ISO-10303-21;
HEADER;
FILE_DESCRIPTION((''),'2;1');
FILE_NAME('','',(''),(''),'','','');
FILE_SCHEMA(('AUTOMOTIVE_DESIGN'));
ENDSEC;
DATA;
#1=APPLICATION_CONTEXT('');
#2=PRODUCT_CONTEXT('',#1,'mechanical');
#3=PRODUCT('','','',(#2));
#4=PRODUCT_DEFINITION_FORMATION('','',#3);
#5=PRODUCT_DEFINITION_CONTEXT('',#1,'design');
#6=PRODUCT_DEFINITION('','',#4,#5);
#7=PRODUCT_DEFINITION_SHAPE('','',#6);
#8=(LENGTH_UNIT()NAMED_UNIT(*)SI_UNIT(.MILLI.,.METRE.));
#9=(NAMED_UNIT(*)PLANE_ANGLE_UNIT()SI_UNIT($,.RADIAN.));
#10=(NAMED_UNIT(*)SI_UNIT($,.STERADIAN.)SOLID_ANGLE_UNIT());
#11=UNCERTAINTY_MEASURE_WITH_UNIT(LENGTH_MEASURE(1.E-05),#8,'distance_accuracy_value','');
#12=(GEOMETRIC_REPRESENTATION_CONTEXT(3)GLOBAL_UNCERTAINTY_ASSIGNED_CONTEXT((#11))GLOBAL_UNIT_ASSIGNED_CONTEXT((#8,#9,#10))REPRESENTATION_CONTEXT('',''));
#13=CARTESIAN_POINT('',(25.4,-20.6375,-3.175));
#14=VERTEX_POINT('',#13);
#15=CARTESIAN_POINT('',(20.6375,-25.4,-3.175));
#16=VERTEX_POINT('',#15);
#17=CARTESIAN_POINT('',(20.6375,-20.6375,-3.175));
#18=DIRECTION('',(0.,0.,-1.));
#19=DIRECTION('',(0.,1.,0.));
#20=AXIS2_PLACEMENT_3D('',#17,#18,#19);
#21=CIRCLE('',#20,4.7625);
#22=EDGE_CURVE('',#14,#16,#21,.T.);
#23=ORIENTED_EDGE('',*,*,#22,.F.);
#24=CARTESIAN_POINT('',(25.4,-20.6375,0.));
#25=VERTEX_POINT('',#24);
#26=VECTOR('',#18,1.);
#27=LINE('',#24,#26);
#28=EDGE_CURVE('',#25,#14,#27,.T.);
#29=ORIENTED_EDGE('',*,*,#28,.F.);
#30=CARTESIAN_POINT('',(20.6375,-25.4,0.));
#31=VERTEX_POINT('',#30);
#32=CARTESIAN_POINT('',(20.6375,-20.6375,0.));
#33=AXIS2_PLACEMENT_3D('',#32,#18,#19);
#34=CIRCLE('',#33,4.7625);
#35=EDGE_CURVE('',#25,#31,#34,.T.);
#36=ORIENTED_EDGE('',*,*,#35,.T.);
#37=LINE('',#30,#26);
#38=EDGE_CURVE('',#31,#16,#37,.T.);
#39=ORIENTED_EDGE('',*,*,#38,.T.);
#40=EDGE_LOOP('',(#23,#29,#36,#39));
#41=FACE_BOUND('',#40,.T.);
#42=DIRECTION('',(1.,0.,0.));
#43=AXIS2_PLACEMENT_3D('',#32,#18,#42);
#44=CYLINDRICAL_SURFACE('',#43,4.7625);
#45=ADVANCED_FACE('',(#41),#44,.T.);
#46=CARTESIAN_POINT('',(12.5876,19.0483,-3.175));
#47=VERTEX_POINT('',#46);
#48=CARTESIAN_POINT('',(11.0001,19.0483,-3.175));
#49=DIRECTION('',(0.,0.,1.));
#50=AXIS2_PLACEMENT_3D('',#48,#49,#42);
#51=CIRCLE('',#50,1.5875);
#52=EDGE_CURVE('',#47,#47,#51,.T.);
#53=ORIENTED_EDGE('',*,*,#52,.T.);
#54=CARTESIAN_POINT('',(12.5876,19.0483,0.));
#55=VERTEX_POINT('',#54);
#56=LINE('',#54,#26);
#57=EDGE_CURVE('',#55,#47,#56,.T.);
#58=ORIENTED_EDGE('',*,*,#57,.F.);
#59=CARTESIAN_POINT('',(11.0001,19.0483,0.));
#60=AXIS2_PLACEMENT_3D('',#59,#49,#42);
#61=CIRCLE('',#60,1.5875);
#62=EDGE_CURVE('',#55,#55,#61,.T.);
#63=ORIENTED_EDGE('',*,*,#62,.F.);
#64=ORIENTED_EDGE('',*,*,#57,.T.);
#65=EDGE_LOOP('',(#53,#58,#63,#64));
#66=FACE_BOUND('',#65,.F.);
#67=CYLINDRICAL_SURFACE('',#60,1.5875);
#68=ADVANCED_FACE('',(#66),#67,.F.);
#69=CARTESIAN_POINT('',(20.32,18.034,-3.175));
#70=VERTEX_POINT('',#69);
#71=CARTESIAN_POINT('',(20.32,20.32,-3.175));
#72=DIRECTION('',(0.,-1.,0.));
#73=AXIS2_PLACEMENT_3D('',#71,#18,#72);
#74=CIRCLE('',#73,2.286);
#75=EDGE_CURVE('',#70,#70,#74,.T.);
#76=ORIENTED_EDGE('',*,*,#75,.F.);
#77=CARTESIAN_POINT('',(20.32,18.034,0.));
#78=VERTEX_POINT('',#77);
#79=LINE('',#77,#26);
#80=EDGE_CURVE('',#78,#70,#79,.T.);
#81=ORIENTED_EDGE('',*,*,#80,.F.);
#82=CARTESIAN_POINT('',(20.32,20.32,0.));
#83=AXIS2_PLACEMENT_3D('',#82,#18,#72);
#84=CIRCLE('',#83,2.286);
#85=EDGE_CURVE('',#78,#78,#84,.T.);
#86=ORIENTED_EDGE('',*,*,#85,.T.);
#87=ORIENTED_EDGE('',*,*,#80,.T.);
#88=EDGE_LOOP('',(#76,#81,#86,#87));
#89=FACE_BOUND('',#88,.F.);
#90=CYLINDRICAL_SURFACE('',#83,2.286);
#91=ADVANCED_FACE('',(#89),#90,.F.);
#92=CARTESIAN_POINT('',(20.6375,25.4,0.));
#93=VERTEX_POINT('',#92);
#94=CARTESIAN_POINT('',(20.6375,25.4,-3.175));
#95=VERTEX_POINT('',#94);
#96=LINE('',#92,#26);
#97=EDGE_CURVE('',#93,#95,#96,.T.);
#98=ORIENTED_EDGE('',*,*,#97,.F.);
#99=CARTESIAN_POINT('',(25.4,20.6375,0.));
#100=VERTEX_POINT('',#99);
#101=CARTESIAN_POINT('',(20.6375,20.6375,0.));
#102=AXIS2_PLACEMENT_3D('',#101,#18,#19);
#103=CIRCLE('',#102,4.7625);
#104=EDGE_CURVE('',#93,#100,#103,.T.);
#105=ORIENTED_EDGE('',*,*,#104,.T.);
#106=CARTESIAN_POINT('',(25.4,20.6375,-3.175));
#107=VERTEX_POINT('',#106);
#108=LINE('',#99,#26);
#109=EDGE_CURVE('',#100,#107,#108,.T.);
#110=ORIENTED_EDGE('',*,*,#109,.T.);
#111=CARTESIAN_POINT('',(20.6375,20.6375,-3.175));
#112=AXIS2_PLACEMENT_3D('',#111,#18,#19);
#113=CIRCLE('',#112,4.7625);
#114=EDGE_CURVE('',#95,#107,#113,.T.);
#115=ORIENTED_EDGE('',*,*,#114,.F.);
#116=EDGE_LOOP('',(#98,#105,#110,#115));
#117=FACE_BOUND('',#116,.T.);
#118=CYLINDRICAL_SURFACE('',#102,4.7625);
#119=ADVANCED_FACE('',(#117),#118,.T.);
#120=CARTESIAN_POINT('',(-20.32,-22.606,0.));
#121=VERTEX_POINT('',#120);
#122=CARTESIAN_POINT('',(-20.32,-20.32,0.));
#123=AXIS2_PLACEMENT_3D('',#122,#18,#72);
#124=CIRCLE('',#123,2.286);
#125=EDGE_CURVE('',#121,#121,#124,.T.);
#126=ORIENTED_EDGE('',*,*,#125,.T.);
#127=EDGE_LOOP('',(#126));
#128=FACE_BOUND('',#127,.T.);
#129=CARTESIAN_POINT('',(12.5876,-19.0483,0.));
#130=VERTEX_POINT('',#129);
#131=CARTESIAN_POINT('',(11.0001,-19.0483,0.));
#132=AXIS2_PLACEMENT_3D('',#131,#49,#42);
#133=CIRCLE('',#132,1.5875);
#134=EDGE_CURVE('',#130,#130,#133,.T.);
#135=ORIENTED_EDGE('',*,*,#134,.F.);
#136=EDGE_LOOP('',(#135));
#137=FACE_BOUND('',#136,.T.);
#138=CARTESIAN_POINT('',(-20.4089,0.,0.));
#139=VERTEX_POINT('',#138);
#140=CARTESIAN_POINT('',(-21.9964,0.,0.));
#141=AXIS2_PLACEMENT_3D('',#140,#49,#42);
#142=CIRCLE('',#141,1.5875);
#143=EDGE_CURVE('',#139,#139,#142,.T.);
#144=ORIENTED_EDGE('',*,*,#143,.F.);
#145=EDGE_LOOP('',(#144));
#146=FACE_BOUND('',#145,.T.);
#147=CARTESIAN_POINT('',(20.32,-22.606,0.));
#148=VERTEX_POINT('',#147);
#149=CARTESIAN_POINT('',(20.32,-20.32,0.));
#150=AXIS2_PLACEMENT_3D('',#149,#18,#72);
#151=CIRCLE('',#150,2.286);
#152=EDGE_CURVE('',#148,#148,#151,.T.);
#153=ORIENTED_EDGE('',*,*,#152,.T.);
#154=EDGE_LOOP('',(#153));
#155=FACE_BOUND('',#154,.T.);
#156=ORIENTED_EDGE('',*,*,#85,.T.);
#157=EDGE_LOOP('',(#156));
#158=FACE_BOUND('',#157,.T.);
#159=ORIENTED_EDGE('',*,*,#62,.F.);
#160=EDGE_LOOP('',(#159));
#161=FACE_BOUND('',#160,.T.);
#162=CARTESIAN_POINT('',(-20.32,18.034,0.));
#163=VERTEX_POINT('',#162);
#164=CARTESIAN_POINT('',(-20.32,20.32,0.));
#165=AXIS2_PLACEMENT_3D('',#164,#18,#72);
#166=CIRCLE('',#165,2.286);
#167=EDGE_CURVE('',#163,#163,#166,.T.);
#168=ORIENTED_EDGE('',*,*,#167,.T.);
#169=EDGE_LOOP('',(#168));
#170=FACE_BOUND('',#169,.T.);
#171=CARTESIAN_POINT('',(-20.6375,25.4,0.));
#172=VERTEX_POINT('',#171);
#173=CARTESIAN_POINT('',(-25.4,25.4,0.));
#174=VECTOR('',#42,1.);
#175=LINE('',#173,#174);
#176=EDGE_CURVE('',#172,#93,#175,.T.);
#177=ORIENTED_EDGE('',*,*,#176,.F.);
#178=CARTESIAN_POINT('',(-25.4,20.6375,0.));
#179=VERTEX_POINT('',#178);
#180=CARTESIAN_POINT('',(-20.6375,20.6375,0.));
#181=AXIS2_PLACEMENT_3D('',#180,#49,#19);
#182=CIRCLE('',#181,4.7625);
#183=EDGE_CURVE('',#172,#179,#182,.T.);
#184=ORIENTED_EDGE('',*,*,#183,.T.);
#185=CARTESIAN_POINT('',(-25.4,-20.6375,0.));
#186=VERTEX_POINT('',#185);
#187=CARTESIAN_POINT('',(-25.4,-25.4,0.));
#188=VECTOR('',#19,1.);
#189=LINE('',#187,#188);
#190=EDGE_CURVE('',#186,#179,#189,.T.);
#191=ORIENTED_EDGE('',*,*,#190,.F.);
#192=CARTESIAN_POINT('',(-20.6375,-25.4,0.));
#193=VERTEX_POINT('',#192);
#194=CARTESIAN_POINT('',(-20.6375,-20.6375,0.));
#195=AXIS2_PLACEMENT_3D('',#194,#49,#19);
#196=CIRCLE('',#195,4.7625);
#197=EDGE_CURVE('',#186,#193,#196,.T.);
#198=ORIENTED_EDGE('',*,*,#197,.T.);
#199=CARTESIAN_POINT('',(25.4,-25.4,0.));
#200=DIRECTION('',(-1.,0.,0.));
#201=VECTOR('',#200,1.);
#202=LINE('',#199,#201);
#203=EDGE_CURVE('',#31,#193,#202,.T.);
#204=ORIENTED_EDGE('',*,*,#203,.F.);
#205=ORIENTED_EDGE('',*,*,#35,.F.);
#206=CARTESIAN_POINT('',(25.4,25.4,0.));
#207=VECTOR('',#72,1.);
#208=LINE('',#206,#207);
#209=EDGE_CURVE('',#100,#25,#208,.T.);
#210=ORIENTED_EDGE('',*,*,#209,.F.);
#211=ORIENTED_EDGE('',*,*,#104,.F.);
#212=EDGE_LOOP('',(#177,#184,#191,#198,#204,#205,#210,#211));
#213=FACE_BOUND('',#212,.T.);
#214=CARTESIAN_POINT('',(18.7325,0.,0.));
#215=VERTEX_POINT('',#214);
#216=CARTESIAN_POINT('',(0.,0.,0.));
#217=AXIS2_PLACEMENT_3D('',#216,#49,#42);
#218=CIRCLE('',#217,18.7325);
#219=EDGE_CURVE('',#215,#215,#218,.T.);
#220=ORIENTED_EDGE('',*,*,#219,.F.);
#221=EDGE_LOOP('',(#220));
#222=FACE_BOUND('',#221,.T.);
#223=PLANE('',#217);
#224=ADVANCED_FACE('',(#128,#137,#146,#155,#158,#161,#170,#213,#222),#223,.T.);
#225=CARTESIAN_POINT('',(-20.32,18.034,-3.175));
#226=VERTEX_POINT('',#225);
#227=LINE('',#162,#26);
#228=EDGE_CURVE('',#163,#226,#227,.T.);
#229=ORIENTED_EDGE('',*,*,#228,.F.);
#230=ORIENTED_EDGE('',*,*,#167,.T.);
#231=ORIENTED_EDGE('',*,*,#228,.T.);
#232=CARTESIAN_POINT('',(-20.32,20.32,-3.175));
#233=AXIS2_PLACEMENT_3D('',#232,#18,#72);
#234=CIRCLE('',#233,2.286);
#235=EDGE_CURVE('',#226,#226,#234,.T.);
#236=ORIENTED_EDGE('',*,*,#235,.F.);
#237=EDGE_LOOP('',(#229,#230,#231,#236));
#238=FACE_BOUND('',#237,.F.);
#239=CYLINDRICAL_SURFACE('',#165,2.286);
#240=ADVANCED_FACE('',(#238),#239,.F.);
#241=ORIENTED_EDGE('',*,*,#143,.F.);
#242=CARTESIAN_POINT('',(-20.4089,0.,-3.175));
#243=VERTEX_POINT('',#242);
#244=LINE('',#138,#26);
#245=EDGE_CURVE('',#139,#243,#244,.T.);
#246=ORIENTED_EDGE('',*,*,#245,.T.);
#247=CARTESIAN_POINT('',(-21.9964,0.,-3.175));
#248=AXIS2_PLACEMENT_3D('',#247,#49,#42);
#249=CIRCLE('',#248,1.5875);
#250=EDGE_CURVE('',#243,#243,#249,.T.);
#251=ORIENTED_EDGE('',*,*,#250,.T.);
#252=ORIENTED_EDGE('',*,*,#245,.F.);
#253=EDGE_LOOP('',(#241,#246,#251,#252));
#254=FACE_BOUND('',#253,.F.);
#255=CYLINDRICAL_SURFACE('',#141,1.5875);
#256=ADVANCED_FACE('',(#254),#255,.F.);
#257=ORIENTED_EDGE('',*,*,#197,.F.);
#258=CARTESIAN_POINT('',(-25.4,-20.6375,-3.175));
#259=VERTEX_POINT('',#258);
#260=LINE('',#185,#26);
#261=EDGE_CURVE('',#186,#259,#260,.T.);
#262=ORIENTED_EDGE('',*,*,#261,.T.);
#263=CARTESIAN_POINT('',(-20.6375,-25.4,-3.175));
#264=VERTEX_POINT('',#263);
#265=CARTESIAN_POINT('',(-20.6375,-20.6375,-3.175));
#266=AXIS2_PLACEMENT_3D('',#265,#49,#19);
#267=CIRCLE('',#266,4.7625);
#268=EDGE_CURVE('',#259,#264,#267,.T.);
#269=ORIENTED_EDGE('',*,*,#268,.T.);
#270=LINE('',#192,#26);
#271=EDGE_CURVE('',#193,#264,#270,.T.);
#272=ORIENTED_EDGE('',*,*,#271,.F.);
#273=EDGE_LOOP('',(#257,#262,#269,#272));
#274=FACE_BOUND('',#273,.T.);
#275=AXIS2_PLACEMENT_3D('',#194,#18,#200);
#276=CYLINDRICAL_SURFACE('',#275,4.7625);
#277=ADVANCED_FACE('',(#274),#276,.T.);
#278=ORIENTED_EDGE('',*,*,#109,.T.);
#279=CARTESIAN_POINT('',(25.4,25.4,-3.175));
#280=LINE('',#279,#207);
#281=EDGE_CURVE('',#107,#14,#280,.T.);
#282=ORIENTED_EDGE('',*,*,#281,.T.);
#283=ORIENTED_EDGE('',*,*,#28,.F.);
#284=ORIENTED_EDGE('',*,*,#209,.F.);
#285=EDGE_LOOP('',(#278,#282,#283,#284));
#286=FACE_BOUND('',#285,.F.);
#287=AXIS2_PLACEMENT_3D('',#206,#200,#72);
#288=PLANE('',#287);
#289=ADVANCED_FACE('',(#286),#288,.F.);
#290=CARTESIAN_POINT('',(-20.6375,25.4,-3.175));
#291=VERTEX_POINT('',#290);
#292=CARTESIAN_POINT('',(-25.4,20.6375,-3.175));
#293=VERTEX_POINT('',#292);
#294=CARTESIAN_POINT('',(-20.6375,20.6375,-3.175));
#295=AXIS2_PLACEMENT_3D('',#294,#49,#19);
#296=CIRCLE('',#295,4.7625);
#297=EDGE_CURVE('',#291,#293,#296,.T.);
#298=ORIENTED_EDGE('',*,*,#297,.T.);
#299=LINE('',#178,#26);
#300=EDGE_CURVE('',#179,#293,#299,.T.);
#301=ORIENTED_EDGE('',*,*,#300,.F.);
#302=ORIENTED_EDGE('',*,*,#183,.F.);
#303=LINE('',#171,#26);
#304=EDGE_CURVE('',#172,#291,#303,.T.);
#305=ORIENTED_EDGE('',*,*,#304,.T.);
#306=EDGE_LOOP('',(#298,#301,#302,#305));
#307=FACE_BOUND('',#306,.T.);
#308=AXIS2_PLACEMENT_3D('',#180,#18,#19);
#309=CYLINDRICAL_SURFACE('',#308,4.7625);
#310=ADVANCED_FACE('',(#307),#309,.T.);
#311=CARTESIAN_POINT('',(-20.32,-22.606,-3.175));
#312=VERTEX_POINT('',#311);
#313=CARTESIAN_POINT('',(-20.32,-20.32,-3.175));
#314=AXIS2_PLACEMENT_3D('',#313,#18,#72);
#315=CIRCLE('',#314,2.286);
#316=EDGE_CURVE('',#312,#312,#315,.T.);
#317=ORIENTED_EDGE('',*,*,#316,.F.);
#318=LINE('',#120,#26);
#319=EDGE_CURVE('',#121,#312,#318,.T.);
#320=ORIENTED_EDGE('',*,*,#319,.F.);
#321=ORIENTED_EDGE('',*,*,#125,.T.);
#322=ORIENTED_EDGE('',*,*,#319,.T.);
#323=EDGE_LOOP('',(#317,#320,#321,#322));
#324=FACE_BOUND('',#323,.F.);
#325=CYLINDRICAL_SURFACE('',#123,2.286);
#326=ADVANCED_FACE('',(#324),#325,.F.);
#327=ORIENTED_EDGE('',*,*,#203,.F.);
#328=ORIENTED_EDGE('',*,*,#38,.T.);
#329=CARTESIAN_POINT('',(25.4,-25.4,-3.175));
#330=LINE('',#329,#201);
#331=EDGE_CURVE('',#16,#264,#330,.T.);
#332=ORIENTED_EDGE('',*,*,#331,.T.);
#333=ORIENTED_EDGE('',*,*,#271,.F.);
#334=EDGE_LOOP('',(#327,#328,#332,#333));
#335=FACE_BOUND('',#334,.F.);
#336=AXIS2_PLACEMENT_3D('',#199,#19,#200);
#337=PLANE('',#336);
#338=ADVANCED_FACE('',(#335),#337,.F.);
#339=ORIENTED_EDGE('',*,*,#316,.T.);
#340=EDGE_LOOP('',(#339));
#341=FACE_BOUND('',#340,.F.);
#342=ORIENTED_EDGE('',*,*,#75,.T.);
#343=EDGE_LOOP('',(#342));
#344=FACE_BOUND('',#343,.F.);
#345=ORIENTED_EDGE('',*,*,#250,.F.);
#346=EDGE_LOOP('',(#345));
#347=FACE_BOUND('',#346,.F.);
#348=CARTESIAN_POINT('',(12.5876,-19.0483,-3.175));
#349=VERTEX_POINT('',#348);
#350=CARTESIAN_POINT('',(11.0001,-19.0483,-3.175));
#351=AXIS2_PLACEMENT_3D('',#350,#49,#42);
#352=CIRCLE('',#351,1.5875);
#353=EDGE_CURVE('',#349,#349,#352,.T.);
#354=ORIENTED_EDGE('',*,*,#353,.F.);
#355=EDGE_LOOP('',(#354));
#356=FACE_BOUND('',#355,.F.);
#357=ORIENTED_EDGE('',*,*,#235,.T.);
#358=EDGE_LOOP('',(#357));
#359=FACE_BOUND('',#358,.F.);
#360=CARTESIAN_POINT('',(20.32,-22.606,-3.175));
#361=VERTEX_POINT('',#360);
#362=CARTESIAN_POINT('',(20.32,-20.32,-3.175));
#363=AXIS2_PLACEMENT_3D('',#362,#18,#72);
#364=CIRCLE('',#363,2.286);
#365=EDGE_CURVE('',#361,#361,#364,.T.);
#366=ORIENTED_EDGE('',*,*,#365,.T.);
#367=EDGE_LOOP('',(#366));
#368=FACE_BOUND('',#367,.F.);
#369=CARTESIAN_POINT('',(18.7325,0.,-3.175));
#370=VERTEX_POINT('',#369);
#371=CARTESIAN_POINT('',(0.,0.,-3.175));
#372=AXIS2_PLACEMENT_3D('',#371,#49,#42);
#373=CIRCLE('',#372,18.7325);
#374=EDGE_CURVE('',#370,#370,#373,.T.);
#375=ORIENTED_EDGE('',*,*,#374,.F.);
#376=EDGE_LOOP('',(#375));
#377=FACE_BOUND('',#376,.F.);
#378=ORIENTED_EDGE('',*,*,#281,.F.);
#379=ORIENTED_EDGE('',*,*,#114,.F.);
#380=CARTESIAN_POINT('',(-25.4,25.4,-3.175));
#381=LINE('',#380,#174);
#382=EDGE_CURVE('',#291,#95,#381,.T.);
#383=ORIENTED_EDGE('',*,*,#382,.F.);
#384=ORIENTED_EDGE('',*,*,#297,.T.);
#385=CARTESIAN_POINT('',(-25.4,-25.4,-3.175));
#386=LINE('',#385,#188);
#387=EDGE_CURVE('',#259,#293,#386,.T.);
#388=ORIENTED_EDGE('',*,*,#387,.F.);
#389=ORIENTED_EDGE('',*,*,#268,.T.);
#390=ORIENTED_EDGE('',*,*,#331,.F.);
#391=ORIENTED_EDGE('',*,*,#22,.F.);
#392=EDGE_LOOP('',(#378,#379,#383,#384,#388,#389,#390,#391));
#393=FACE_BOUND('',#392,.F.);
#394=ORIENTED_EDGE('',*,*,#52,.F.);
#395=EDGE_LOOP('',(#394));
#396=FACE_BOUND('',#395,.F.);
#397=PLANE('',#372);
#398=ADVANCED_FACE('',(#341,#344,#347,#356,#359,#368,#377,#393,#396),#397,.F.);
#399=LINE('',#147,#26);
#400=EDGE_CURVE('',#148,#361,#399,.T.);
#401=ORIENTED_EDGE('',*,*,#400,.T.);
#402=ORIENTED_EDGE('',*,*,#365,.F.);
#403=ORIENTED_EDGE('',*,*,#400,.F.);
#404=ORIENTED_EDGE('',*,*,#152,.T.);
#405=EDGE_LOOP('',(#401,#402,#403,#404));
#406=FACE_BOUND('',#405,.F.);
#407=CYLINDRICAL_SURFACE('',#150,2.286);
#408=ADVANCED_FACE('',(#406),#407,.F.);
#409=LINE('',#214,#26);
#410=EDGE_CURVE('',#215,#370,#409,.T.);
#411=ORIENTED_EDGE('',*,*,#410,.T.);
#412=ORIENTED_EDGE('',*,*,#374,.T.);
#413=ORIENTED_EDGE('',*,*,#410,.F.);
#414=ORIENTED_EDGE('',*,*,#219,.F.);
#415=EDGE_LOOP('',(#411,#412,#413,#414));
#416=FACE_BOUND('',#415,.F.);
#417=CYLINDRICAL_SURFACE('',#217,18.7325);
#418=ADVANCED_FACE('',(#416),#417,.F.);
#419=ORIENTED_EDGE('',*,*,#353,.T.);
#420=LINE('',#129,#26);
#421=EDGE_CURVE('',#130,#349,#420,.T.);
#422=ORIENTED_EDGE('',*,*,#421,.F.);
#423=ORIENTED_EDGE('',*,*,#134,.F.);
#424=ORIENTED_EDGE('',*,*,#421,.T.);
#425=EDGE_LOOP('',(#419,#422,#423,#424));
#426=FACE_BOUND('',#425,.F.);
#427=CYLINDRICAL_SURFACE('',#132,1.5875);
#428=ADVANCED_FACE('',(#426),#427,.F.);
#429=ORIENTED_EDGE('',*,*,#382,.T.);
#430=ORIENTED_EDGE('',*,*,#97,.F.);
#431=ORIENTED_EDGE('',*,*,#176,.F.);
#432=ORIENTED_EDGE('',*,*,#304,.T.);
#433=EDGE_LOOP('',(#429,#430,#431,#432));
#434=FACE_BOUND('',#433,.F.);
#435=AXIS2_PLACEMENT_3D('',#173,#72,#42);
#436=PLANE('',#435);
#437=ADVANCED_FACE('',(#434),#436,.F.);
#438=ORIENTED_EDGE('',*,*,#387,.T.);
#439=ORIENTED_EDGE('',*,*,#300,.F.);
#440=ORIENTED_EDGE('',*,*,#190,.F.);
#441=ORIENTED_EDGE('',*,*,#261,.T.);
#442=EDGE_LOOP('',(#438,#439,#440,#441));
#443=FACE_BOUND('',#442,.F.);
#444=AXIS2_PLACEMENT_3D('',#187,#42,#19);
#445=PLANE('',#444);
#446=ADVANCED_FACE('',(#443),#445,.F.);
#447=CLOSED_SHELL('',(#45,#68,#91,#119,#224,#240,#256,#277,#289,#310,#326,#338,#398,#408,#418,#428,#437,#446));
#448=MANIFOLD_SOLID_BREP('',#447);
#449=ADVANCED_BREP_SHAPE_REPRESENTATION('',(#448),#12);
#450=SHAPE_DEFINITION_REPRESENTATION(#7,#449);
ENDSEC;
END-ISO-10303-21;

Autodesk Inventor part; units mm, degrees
ref_plane "YZ Plane" through (0, 0, 0) normal (1, 0, 0) x (0, 1, 0)
ref_plane "XZ Plane" through (0, 0, 0) normal (0, 1, 0) x (-1, 0, 0)
ref_plane "XY Plane" through (0, 0, 0) normal (0, 0, 1) x (1, 0, 0)
sketch "Sketch1" plane through (0, 0, 0) normal (0, 0, 1) x (1, 0, 0)
  line L0 (-13, 12) -> (13, 12)
  line L1 (13, 12) -> (13, -12)
  line L2 (13, -12) -> (-13, -12)
  line L3 (-13, -12) -> (-13, 12)
  line L4 (-13, 3.25) -> (-15, 3.25)
  line L5 (-15, 3.25) -> (-15, -3.25)
  line L6 (-15, -3.25) -> (-13, -3.25)
  line L7 (-13, -3.25) -> (-13, 3.25)
  line L8 (13, 3.25) -> (15, 3.25)
  line L9 (15, 3.25) -> (15, -3.25)
  line L10 (15, -3.25) -> (13, -3.25)
  line L11 (13, -3.25) -> (13, 3.25)
  line L12 (-25.4, 25.4) -> (25.4, 25.4)
  line L13 (25.4, 25.4) -> (25.4, -25.4)
  line L14 (25.4, -25.4) -> (-25.4, -25.4)
  line L15 (-25.4, -25.4) -> (-25.4, 25.4)
  circle A0 centre (0, 0) radius 7.1437
  circle A1 centre (-3, 12) radius 1.5
  line L16 (-13, 8) -> (-9, 12)
  line L17 (9, 12) -> (13, 8)
  line L18 (13, -8) -> (9, -12)
  line L19 (-13, -8) -> (-9, -12)
  circle A2 centre (0, 0) radius 18.7325
  circle A3 centre (-21.9964, 0) radius 1.5875
  circle A4 centre (11.0001, 19.0483) radius 1.5875
  circle A5 centre (11.0001, -19.0483) radius 1.5875
  circle A6 centre (0, 0) radius 21.9964 construction
  point P0 (-14, 3.25)
  point P1 (14, 3.25)
  point P2 (-14, -3.25)
  point P3 (14, -3.25)
  point P4 (-20.32, 20.32)
  point P5 (20.32, 20.32)
  point P6 (20.32, -20.32)
  point P7 (-20.32, -20.32)
  dimension "d0" = 24
  dimension "d1" = 12
  dimension "d2" = 26
  dimension "d3" = 13
  dimension "d4" = 2
  dimension "d5" = 6.5
  dimension "d6" = 3.25
  dimension "d7" = 2
  dimension "d8" = 14.2875
  dimension "d9" = 50.8
  dimension "d10" = 25.4
  dimension "d11" = 50.8
  dimension "d12" = 25.4
  dimension "d13" = 3
  dimension "d14" = 10
  dimension "d15" = 4
  dimension "d16" = 4
  dimension "d17" = 4
  dimension "d18" = 4
  dimension "d19" = 4
  dimension "d20" = 5.08
  dimension "d21" = 5.08
  dimension "d22" = 5.08
  dimension "d23" = 5.08
  dimension "d34" = 40.64
  dimension "d35" = 40.64
  dimension "d44" = 37.465
  dimension "d45" = 3.175
  dimension "d46" = 3.175
  dimension "d47" = 3.175
  dimension "d48" = 38.1
  dimension "d50" = 38.1
  dimension "d57" = 43.9928
  dimension "d58" = 38.0966
extrude "Extrusion1" add sketch "Sketch1" against normal blind 3.175 contours L0 L16 L3 | L0 L1 L17 | L19 L2 L3 | L18 L1 L2 | L12 L13 L14 L15 | A2 | A3 | A4 | A5
fillet "Fillet1" radius 3.175 4 edges at (-13, -3.25, -1.5875) (-13, 3.25, -1.5875) (13, 3.25, -1.5875) (13, -3.25, -1.5875)
hole "Hole1" at (-20.32, 20.32, 0) at (20.32, 20.32, 0) at (20.32, -20.32, 0) at (-20.32, -20.32, 0) direction (0, 0, -1) diameter 4.572 end through all
extrude "Extrusion2" cut sketch "Sketch1" against normal blind 25.4 contours L0 L16 L3 | L0 A1 L17 L1 L18 L2 L19 L3 L16 | L0 A1 | L0 L1 L17 | L19 L2 L3 | L18 L1 L2 | A0 | A2 | A3 | A4 | A5 picked at (-3.284, 11.1238)
fillet "Fillet2" radius 4.7625 4 edges at (25.4, 25.4, -1.5875) (-25.4, 25.4, -1.5875) (25.4, -25.4, -1.5875) (-25.4, -25.4, -1.5875)
equation "\"d1\" = 0.5 * d0"
equation "\"d3\" = 0.5 * d2"
equation "\"d6\" = 0.5 * d5"
equation "\"d7\" = d4"
equation "\"d10\" = 0.5 * d9"
equation "\"d12\" = 0.5 * d11"
equation "\"d16\" = d15"
equation "\"d17\" = d15"
equation "\"d18\" = d15"
equation "\"d19\" = d15"
equation "\"d22\" = d21"
equation "\"d23\" = d21"
equation "\"d46\" = d45"
equation "\"d47\" = d45"
properties part number "BD gearbox mount block"
